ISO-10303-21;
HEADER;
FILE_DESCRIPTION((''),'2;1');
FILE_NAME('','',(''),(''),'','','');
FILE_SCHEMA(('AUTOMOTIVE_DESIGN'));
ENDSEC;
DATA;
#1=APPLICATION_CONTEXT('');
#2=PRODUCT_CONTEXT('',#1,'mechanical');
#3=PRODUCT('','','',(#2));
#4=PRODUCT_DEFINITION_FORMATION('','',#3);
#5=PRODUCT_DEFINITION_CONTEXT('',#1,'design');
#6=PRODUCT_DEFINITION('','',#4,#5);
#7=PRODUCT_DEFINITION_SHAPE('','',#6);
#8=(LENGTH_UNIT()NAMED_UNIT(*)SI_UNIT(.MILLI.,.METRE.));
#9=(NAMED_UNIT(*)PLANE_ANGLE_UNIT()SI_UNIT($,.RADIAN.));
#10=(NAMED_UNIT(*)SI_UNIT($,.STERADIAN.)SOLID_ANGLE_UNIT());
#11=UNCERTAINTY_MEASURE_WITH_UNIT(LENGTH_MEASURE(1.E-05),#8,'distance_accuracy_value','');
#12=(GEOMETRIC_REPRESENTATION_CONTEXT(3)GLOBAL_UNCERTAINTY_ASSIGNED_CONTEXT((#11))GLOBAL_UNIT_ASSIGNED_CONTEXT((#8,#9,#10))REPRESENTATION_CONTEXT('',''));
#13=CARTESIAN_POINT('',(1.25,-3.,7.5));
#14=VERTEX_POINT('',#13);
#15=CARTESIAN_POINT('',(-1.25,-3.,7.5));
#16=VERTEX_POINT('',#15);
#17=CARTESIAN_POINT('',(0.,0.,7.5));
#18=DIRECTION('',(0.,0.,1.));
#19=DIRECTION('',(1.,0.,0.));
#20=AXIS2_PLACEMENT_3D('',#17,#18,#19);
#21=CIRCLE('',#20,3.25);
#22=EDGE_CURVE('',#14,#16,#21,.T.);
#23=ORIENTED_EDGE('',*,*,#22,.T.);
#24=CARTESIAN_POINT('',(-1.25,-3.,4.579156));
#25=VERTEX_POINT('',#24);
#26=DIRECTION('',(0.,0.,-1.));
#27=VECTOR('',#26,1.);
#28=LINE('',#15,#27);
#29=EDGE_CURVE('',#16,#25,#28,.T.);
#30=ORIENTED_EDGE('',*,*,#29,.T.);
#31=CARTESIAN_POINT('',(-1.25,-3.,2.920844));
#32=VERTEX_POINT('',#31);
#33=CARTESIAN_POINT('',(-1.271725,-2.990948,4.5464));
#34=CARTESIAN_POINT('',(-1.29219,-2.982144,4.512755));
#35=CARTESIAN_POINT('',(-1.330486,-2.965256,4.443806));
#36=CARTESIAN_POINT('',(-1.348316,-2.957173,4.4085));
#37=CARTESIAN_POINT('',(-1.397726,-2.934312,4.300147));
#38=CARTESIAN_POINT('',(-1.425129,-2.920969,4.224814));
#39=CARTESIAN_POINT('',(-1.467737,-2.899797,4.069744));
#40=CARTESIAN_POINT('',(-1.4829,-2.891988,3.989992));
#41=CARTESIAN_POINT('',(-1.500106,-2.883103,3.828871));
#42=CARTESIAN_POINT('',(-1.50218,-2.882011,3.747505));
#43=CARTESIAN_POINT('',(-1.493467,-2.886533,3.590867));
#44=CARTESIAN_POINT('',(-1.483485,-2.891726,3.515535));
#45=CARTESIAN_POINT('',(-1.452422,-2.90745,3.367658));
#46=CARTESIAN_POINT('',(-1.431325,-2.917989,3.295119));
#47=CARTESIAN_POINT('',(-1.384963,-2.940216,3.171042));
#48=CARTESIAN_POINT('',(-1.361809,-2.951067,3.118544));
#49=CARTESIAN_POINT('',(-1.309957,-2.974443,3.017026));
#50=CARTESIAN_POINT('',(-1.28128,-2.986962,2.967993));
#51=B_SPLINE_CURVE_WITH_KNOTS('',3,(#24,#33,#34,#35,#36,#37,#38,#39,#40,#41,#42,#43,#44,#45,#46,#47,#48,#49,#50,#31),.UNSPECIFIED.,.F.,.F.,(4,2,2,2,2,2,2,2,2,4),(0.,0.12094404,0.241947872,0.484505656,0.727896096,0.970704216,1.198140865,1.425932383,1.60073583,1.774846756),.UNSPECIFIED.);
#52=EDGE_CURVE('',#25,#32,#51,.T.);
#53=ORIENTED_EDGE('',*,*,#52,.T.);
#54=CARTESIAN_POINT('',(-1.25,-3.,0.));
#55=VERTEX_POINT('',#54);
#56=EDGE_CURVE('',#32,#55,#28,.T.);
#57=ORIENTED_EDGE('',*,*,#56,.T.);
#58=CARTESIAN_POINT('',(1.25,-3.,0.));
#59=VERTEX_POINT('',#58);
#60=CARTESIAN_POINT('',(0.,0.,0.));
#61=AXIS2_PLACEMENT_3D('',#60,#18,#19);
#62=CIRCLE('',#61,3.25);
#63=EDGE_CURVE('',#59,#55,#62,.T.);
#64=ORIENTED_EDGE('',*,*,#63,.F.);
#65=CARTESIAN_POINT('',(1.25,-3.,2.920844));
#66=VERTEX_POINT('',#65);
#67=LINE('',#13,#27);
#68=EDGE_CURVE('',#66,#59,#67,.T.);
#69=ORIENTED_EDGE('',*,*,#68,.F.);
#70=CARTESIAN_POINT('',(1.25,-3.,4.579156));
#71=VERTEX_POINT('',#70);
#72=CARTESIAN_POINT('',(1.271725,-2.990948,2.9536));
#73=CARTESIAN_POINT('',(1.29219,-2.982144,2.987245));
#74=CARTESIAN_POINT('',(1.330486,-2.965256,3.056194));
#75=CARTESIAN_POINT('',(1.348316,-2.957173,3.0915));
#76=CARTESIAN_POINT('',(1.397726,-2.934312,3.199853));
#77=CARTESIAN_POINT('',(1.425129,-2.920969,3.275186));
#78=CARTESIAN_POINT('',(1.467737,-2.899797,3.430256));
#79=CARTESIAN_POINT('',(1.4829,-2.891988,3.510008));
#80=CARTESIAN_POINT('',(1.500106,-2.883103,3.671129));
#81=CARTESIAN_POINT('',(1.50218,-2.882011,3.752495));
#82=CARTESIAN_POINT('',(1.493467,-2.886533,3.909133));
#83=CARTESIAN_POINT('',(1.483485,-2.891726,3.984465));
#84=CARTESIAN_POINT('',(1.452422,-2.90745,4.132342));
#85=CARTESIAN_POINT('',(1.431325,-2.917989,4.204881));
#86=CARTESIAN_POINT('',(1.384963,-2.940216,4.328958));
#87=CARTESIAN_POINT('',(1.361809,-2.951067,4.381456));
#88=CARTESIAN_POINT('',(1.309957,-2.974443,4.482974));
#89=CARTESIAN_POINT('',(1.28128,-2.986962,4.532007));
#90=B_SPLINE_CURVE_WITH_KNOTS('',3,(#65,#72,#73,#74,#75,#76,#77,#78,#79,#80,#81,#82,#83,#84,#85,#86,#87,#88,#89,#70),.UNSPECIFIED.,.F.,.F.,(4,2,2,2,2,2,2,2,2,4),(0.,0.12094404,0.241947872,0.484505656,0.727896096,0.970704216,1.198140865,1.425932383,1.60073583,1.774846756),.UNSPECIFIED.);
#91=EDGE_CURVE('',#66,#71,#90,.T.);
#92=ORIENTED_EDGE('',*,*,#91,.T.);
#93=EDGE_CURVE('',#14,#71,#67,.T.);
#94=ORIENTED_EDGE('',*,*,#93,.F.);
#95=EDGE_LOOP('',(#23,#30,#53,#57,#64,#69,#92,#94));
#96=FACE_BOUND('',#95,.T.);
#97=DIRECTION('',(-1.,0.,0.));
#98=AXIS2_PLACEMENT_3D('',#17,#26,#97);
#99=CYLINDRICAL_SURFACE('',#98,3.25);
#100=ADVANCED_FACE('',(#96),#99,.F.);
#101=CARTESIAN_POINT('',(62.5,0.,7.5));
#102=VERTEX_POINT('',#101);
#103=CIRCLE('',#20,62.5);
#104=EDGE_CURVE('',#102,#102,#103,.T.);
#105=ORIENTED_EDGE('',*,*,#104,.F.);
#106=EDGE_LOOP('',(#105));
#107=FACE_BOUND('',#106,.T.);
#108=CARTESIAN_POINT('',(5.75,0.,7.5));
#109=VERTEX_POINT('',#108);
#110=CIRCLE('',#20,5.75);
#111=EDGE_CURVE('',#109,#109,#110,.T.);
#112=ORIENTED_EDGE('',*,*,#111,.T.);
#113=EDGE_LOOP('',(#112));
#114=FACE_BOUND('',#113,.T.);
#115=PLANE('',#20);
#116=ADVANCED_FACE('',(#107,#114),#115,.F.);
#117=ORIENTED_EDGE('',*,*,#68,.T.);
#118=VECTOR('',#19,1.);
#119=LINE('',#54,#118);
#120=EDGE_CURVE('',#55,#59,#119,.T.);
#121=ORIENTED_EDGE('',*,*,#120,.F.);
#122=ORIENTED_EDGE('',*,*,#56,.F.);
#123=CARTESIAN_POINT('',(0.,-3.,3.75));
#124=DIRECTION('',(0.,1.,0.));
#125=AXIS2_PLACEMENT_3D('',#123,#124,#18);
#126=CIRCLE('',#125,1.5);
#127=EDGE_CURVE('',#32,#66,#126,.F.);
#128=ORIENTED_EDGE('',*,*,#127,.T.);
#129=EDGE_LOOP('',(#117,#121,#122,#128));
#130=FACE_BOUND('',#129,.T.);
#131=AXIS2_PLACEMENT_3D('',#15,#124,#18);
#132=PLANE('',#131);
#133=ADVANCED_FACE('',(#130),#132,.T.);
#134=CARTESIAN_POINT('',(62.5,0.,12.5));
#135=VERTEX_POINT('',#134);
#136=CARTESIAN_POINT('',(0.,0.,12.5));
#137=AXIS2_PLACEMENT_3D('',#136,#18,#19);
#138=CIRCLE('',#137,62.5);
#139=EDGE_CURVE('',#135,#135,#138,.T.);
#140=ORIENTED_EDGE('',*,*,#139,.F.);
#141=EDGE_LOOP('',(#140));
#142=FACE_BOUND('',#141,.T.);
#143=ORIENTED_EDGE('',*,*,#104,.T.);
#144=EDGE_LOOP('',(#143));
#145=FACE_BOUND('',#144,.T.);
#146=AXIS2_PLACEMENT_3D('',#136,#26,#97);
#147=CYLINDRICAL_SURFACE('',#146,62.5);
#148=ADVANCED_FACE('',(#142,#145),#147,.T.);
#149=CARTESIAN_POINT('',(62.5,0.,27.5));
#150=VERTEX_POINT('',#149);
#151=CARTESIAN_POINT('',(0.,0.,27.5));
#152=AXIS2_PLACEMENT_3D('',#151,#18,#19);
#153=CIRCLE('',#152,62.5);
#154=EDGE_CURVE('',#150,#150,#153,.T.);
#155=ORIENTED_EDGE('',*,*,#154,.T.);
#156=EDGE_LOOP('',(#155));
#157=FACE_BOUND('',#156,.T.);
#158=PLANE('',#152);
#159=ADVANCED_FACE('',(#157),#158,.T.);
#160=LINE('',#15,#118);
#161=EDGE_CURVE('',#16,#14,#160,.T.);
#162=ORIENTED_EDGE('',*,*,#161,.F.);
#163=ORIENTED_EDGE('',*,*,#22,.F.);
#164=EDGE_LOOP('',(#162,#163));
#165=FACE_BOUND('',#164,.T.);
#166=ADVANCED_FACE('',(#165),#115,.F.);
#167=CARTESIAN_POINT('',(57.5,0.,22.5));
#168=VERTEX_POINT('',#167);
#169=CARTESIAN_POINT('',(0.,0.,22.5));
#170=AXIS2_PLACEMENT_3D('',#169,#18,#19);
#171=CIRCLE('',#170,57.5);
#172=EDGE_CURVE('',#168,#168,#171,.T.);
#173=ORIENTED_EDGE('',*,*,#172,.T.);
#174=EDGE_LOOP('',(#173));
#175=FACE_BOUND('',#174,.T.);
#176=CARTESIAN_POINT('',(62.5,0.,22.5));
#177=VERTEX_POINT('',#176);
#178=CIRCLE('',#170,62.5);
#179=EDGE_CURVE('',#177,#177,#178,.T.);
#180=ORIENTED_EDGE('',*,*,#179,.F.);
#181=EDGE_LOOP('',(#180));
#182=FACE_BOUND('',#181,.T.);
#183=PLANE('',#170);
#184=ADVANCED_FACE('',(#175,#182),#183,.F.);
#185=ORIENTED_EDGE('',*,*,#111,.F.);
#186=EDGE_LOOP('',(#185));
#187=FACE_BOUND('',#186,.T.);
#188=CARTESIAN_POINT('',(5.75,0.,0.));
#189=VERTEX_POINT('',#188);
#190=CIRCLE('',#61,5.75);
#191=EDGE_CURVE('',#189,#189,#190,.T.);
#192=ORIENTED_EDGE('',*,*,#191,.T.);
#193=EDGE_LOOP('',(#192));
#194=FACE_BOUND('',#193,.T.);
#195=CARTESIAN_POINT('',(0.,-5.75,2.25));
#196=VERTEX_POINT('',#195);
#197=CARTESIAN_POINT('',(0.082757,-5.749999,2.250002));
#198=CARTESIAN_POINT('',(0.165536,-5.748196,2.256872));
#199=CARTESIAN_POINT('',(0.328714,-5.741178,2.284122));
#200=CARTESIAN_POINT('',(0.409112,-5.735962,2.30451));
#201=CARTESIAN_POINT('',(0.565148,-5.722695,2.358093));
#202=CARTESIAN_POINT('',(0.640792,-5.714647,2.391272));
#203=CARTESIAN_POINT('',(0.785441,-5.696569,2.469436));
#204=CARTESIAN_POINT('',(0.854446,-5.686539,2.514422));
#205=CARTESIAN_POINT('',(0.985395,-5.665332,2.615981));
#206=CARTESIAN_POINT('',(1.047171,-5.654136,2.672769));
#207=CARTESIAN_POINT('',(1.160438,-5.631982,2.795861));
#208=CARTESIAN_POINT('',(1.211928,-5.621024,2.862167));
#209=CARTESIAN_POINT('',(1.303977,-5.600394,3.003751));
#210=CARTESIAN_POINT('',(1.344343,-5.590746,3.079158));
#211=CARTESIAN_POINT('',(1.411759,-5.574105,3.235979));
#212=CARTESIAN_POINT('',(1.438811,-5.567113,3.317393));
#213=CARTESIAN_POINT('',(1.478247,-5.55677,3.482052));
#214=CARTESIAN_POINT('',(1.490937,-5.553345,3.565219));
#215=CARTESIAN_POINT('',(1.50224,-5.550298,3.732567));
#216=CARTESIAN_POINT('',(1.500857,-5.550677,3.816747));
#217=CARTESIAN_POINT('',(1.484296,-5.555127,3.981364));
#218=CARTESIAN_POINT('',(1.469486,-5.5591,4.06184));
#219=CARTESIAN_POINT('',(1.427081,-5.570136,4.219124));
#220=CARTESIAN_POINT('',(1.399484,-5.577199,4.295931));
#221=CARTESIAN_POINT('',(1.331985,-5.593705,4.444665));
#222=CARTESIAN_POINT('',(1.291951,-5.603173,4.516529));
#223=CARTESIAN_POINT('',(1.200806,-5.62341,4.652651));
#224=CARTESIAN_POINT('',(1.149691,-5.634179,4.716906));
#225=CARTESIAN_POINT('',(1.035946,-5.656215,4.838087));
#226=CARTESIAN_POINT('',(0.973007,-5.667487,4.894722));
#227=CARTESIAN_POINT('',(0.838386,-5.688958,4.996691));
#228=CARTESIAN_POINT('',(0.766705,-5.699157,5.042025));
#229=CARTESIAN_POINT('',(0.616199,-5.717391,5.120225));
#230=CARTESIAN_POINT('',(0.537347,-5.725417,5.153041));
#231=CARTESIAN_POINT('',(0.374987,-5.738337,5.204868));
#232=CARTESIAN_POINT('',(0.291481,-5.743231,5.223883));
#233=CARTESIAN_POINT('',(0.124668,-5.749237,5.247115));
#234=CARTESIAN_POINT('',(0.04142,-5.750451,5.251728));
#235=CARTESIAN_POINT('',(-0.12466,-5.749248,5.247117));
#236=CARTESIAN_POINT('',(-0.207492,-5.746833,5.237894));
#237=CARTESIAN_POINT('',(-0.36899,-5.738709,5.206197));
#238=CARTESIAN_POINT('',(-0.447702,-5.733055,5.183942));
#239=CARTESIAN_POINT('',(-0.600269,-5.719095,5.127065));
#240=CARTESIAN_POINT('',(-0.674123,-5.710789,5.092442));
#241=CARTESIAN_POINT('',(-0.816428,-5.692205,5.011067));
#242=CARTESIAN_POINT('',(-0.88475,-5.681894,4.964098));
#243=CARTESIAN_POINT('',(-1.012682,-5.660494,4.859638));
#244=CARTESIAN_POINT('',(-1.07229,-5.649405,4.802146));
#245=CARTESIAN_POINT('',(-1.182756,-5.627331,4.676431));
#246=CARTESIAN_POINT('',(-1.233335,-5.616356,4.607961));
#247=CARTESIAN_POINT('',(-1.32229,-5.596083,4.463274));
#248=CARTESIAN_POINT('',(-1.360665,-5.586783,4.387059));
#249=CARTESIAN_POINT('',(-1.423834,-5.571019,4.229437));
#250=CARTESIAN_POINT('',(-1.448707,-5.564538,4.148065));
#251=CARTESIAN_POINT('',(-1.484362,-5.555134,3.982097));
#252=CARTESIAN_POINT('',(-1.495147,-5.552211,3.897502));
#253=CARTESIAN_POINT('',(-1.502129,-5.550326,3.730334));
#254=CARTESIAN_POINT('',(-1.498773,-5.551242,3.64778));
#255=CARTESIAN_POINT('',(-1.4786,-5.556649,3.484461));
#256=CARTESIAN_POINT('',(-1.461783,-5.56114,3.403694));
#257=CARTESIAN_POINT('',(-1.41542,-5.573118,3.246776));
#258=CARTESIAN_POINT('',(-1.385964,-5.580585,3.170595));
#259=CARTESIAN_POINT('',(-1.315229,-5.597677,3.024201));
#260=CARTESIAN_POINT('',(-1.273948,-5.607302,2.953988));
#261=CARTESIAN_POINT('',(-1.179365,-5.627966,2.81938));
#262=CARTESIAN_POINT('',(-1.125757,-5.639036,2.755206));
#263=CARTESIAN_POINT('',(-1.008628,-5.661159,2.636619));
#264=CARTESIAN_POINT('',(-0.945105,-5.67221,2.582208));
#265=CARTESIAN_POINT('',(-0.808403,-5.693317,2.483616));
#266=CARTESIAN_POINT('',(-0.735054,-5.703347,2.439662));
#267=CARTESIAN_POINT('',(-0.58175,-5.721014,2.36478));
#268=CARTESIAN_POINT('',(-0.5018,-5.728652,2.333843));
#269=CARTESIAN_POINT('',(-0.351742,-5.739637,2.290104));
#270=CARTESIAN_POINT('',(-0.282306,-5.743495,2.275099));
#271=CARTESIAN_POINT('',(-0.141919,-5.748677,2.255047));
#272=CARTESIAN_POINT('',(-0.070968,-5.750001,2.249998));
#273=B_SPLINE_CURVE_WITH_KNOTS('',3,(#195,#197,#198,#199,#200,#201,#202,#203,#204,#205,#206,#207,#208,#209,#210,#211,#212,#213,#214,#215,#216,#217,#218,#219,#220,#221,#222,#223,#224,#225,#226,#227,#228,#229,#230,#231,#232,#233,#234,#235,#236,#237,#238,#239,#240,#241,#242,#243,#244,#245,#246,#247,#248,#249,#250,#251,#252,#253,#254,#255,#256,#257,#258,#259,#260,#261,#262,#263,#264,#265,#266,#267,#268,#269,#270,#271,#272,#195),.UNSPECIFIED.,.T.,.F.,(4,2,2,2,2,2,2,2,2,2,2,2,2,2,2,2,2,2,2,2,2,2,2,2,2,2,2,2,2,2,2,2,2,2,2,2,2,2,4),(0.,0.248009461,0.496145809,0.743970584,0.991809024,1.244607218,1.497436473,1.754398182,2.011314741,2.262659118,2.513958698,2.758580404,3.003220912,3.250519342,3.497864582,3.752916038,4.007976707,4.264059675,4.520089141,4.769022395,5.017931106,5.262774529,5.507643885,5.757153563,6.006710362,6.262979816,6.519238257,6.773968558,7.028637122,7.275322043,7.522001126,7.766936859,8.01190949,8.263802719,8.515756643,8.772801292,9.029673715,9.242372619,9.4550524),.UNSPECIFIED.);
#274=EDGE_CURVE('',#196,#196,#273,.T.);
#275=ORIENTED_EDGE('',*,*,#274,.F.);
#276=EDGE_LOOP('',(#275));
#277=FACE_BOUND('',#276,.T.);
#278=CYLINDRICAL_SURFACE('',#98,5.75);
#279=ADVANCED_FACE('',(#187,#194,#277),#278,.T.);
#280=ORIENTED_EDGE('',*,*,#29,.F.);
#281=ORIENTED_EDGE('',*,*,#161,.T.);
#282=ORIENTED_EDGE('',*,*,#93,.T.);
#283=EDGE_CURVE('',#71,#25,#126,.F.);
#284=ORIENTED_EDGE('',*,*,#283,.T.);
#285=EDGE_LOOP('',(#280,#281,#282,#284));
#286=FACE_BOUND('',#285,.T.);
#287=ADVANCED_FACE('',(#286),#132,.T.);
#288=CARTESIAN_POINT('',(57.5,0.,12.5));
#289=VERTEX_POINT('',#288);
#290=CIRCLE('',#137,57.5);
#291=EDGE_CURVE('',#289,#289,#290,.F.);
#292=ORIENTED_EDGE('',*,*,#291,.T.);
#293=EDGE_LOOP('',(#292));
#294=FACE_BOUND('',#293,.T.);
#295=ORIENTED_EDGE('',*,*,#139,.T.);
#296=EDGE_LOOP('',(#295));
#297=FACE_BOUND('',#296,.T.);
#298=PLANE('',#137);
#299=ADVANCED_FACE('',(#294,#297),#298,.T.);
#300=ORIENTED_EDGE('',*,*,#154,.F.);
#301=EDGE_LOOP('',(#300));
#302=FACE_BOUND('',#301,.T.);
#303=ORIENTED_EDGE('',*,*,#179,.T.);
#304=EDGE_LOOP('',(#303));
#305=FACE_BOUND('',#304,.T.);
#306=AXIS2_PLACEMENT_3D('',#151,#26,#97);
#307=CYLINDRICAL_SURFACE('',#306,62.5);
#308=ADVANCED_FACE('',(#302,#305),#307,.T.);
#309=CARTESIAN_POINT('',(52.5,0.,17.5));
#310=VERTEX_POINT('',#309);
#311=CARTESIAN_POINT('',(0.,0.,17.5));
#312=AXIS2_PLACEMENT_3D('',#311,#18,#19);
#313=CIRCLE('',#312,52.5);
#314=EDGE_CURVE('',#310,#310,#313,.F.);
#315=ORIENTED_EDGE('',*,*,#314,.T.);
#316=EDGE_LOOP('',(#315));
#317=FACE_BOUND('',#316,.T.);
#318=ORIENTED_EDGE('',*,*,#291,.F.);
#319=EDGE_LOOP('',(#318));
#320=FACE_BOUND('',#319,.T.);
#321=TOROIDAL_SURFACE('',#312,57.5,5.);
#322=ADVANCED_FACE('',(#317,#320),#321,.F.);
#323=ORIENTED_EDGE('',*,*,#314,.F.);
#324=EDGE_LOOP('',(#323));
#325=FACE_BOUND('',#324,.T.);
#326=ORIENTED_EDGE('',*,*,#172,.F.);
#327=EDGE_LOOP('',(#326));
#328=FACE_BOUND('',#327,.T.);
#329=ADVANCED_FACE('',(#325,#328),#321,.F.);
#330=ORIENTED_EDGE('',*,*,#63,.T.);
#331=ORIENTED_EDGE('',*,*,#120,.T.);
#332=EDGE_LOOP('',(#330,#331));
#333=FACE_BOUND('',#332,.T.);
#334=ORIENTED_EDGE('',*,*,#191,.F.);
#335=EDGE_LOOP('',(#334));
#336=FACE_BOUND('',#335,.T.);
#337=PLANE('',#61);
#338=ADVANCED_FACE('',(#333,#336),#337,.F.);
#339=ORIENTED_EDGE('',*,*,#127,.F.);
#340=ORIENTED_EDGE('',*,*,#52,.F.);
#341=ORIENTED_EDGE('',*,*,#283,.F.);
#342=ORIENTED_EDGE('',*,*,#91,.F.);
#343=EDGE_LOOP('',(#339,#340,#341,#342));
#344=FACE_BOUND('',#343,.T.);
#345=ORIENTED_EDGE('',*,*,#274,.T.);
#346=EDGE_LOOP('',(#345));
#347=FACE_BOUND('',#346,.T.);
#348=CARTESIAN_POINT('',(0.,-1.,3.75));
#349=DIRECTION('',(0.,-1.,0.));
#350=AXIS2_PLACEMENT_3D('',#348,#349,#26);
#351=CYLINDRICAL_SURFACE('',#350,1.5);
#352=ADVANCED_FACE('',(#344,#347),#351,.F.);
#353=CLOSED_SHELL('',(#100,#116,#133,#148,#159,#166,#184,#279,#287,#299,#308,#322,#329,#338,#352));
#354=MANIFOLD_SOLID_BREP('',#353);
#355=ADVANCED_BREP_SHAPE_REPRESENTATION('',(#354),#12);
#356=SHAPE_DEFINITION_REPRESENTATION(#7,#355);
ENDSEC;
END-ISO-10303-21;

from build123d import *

# Parameters (mm, degrees)
SKETCH2_R               = 5.75
BOSS_EXTRUDE1_DEPTH     = 7.5
CUT_EXTRUDE1_DEPTH      = 2
CUT_EXTRUDE1_DEPTH_BACK = 13.879246872
SKETCH3_R               = 1.5
SKETCH4_R               = 62.5
BOSS_EXTRUDE2_DEPTH     = 5
SKETCH5_R               = 52.5
BOSS_EXTRUDE3_DEPTH     = 10
SKETCH6_R               = 62.5
BOSS_EXTRUDE4_DEPTH     = 5
FILLET2_R               = 5


with BuildPart() as part:
    # Sketch2 → Boss-Extrude1 (new body)
    with BuildSketch(Plane.XY):
        Circle(SKETCH2_R)
        with BuildLine():
            Line((-1.25, -3), (1.25, -3))
            ThreePointArc((1.25, -3), (0, 3.25), (-1.25, -3))
        make_face(mode=Mode.SUBTRACT)
    extrude(amount=BOSS_EXTRUDE1_DEPTH)

    # Sketch3 → Cut-Extrude1 (cut, two sides: drawn at the far end of the back side and taken through both)
    with BuildSketch(Plane(origin=(0, -3, 0), x_dir=(1, 0, 0), z_dir=(0, 1, 0)).offset(-CUT_EXTRUDE1_DEPTH_BACK)):
        with Locations(Location((0, -3.75, 0), (0, 0, 90))):
            Circle(SKETCH3_R)
    extrude(amount=CUT_EXTRUDE1_DEPTH + CUT_EXTRUDE1_DEPTH_BACK, mode=Mode.SUBTRACT)

    # Sketch4 → Boss-Extrude2 (add)
    with BuildSketch(Plane.XY.offset(7.5)):
        Circle(SKETCH4_R)
    extrude(amount=BOSS_EXTRUDE2_DEPTH)

    # Sketch5 → Boss-Extrude3 (add)
    with BuildSketch(Plane.XY.offset(12.5)):
        Circle(SKETCH5_R)
    extrude(amount=BOSS_EXTRUDE3_DEPTH)

    # Sketch6 → Boss-Extrude4 (add)
    with BuildSketch(Plane.XY.offset(22.5)):
        Circle(SKETCH6_R)
    extrude(amount=BOSS_EXTRUDE4_DEPTH)

    # Fillet2
    fillet2_edges = [part.edges().sort_by_distance(p)[0] for p in [
        (-52.5, 0, 12.5),
        (-52.5, 0, 22.5),
    ]]
    fillet(fillet2_edges, radius=FILLET2_R - 0.0001)  # a hair under: the kernel refuses the full size


solid = part.part
